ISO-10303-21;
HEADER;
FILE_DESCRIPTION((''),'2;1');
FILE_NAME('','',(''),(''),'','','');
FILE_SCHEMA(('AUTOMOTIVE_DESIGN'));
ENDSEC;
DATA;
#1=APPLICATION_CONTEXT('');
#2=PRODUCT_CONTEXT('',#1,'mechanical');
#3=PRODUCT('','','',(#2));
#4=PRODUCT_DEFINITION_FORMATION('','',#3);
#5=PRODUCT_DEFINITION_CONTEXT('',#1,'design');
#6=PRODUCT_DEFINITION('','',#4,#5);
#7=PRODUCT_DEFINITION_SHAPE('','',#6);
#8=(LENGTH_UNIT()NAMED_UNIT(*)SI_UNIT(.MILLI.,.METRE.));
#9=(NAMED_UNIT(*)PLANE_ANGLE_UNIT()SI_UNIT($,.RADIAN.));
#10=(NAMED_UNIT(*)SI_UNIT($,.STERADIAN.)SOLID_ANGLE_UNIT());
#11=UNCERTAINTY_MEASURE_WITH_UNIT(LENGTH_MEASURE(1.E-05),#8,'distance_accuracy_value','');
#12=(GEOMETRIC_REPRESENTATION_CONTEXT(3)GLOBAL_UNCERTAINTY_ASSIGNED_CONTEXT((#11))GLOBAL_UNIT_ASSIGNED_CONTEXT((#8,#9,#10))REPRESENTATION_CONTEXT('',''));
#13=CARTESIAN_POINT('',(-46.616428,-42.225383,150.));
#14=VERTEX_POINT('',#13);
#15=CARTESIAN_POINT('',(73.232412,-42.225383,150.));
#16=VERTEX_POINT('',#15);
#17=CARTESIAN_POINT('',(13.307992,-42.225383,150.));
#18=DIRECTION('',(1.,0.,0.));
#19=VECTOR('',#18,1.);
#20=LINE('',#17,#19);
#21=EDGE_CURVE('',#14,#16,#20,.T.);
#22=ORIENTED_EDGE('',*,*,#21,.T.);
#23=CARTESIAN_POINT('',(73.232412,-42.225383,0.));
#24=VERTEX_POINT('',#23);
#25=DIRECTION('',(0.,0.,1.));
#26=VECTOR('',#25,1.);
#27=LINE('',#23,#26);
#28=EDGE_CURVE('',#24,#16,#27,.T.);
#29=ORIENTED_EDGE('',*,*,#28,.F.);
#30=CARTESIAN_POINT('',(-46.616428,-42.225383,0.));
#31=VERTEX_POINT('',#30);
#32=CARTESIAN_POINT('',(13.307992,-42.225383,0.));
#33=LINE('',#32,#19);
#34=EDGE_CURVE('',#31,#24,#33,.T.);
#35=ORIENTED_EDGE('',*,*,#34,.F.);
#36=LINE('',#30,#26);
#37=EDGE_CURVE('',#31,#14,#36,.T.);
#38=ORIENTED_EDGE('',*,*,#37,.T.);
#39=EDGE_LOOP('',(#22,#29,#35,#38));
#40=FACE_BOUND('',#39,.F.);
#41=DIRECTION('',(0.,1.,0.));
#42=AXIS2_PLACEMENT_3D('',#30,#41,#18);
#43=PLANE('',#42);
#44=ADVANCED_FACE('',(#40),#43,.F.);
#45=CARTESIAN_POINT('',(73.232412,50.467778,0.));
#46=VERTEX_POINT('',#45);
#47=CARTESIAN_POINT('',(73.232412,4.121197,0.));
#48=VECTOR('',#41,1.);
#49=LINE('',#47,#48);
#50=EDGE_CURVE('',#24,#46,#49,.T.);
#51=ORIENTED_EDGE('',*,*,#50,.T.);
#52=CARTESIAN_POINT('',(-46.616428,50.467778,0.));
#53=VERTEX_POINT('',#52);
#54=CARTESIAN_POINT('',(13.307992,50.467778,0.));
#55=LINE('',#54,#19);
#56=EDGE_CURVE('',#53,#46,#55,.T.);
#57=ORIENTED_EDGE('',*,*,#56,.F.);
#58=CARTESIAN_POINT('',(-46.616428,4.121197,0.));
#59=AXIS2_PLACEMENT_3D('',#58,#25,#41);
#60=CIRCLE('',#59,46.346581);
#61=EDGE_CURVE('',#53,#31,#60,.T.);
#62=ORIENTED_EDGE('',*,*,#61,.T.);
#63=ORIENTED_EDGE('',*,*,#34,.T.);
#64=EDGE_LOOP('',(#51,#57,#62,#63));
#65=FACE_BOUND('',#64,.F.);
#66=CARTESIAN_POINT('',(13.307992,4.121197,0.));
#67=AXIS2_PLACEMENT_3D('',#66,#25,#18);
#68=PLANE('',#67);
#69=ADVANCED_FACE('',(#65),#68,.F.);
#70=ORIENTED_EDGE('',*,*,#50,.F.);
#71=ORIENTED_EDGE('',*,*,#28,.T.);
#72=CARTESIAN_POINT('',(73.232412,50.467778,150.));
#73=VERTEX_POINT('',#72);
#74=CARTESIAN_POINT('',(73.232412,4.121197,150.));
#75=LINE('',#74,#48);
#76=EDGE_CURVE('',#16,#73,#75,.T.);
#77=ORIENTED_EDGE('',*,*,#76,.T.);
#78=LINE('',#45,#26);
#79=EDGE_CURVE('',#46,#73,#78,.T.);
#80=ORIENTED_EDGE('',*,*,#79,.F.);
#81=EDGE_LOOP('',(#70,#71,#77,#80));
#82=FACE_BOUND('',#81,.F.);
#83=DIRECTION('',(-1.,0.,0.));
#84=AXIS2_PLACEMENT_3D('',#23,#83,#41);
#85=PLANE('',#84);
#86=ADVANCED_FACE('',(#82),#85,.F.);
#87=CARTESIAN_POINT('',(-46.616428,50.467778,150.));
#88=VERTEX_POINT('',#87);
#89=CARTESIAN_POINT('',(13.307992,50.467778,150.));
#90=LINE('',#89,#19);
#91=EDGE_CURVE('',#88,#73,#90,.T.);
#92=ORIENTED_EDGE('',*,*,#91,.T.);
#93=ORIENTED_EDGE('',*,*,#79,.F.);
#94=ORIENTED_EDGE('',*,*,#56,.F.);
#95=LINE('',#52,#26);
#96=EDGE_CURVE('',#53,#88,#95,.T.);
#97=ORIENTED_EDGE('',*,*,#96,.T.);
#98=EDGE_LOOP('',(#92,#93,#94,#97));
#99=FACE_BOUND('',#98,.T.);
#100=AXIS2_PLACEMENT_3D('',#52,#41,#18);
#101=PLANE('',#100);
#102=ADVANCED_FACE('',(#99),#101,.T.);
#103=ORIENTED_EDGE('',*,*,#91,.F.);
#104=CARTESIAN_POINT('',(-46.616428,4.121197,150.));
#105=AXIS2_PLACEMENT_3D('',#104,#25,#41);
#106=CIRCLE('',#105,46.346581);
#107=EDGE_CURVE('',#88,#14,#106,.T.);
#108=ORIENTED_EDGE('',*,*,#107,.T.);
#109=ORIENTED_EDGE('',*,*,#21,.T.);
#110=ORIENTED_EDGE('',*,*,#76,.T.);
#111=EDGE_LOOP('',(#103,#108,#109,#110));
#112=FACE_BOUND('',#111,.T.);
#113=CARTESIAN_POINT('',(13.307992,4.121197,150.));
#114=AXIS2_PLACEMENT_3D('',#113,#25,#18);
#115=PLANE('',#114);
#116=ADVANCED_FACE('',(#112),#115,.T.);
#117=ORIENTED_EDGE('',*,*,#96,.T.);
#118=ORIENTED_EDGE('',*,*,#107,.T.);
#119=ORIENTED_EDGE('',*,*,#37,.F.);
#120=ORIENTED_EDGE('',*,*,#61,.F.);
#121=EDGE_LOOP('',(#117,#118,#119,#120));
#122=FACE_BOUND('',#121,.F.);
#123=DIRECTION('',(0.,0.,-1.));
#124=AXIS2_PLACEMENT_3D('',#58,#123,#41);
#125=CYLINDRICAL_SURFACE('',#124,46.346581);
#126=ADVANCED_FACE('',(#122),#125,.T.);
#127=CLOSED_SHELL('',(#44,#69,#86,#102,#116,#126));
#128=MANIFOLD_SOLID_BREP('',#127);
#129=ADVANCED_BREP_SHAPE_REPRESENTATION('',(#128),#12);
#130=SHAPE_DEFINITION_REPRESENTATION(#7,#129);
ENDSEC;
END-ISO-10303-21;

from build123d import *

# Parameters (mm, degrees)
F0_W     = 119.8488399386
F0_H     = 92.6931612194
F1_DEPTH = 150


with BuildPart() as f1:
    # F0 (on Top) → F1 (new body)
    with BuildSketch(Plane.XY):
        with Locations((13.3079923689, 4.1211973876)):
            Rectangle(F0_W, F0_H)
        with BuildLine():
            Line((-46.6164276004, -42.2253832221), (-46.6164276004, 50.4677779973))
            ThreePointArc((-46.6164276004, 50.4677779973), (-92.9630082101, 4.1211973876), (-46.6164276004, -42.2253832221))
        make_face()
    extrude(amount=F1_DEPTH)


solid = f1.part
